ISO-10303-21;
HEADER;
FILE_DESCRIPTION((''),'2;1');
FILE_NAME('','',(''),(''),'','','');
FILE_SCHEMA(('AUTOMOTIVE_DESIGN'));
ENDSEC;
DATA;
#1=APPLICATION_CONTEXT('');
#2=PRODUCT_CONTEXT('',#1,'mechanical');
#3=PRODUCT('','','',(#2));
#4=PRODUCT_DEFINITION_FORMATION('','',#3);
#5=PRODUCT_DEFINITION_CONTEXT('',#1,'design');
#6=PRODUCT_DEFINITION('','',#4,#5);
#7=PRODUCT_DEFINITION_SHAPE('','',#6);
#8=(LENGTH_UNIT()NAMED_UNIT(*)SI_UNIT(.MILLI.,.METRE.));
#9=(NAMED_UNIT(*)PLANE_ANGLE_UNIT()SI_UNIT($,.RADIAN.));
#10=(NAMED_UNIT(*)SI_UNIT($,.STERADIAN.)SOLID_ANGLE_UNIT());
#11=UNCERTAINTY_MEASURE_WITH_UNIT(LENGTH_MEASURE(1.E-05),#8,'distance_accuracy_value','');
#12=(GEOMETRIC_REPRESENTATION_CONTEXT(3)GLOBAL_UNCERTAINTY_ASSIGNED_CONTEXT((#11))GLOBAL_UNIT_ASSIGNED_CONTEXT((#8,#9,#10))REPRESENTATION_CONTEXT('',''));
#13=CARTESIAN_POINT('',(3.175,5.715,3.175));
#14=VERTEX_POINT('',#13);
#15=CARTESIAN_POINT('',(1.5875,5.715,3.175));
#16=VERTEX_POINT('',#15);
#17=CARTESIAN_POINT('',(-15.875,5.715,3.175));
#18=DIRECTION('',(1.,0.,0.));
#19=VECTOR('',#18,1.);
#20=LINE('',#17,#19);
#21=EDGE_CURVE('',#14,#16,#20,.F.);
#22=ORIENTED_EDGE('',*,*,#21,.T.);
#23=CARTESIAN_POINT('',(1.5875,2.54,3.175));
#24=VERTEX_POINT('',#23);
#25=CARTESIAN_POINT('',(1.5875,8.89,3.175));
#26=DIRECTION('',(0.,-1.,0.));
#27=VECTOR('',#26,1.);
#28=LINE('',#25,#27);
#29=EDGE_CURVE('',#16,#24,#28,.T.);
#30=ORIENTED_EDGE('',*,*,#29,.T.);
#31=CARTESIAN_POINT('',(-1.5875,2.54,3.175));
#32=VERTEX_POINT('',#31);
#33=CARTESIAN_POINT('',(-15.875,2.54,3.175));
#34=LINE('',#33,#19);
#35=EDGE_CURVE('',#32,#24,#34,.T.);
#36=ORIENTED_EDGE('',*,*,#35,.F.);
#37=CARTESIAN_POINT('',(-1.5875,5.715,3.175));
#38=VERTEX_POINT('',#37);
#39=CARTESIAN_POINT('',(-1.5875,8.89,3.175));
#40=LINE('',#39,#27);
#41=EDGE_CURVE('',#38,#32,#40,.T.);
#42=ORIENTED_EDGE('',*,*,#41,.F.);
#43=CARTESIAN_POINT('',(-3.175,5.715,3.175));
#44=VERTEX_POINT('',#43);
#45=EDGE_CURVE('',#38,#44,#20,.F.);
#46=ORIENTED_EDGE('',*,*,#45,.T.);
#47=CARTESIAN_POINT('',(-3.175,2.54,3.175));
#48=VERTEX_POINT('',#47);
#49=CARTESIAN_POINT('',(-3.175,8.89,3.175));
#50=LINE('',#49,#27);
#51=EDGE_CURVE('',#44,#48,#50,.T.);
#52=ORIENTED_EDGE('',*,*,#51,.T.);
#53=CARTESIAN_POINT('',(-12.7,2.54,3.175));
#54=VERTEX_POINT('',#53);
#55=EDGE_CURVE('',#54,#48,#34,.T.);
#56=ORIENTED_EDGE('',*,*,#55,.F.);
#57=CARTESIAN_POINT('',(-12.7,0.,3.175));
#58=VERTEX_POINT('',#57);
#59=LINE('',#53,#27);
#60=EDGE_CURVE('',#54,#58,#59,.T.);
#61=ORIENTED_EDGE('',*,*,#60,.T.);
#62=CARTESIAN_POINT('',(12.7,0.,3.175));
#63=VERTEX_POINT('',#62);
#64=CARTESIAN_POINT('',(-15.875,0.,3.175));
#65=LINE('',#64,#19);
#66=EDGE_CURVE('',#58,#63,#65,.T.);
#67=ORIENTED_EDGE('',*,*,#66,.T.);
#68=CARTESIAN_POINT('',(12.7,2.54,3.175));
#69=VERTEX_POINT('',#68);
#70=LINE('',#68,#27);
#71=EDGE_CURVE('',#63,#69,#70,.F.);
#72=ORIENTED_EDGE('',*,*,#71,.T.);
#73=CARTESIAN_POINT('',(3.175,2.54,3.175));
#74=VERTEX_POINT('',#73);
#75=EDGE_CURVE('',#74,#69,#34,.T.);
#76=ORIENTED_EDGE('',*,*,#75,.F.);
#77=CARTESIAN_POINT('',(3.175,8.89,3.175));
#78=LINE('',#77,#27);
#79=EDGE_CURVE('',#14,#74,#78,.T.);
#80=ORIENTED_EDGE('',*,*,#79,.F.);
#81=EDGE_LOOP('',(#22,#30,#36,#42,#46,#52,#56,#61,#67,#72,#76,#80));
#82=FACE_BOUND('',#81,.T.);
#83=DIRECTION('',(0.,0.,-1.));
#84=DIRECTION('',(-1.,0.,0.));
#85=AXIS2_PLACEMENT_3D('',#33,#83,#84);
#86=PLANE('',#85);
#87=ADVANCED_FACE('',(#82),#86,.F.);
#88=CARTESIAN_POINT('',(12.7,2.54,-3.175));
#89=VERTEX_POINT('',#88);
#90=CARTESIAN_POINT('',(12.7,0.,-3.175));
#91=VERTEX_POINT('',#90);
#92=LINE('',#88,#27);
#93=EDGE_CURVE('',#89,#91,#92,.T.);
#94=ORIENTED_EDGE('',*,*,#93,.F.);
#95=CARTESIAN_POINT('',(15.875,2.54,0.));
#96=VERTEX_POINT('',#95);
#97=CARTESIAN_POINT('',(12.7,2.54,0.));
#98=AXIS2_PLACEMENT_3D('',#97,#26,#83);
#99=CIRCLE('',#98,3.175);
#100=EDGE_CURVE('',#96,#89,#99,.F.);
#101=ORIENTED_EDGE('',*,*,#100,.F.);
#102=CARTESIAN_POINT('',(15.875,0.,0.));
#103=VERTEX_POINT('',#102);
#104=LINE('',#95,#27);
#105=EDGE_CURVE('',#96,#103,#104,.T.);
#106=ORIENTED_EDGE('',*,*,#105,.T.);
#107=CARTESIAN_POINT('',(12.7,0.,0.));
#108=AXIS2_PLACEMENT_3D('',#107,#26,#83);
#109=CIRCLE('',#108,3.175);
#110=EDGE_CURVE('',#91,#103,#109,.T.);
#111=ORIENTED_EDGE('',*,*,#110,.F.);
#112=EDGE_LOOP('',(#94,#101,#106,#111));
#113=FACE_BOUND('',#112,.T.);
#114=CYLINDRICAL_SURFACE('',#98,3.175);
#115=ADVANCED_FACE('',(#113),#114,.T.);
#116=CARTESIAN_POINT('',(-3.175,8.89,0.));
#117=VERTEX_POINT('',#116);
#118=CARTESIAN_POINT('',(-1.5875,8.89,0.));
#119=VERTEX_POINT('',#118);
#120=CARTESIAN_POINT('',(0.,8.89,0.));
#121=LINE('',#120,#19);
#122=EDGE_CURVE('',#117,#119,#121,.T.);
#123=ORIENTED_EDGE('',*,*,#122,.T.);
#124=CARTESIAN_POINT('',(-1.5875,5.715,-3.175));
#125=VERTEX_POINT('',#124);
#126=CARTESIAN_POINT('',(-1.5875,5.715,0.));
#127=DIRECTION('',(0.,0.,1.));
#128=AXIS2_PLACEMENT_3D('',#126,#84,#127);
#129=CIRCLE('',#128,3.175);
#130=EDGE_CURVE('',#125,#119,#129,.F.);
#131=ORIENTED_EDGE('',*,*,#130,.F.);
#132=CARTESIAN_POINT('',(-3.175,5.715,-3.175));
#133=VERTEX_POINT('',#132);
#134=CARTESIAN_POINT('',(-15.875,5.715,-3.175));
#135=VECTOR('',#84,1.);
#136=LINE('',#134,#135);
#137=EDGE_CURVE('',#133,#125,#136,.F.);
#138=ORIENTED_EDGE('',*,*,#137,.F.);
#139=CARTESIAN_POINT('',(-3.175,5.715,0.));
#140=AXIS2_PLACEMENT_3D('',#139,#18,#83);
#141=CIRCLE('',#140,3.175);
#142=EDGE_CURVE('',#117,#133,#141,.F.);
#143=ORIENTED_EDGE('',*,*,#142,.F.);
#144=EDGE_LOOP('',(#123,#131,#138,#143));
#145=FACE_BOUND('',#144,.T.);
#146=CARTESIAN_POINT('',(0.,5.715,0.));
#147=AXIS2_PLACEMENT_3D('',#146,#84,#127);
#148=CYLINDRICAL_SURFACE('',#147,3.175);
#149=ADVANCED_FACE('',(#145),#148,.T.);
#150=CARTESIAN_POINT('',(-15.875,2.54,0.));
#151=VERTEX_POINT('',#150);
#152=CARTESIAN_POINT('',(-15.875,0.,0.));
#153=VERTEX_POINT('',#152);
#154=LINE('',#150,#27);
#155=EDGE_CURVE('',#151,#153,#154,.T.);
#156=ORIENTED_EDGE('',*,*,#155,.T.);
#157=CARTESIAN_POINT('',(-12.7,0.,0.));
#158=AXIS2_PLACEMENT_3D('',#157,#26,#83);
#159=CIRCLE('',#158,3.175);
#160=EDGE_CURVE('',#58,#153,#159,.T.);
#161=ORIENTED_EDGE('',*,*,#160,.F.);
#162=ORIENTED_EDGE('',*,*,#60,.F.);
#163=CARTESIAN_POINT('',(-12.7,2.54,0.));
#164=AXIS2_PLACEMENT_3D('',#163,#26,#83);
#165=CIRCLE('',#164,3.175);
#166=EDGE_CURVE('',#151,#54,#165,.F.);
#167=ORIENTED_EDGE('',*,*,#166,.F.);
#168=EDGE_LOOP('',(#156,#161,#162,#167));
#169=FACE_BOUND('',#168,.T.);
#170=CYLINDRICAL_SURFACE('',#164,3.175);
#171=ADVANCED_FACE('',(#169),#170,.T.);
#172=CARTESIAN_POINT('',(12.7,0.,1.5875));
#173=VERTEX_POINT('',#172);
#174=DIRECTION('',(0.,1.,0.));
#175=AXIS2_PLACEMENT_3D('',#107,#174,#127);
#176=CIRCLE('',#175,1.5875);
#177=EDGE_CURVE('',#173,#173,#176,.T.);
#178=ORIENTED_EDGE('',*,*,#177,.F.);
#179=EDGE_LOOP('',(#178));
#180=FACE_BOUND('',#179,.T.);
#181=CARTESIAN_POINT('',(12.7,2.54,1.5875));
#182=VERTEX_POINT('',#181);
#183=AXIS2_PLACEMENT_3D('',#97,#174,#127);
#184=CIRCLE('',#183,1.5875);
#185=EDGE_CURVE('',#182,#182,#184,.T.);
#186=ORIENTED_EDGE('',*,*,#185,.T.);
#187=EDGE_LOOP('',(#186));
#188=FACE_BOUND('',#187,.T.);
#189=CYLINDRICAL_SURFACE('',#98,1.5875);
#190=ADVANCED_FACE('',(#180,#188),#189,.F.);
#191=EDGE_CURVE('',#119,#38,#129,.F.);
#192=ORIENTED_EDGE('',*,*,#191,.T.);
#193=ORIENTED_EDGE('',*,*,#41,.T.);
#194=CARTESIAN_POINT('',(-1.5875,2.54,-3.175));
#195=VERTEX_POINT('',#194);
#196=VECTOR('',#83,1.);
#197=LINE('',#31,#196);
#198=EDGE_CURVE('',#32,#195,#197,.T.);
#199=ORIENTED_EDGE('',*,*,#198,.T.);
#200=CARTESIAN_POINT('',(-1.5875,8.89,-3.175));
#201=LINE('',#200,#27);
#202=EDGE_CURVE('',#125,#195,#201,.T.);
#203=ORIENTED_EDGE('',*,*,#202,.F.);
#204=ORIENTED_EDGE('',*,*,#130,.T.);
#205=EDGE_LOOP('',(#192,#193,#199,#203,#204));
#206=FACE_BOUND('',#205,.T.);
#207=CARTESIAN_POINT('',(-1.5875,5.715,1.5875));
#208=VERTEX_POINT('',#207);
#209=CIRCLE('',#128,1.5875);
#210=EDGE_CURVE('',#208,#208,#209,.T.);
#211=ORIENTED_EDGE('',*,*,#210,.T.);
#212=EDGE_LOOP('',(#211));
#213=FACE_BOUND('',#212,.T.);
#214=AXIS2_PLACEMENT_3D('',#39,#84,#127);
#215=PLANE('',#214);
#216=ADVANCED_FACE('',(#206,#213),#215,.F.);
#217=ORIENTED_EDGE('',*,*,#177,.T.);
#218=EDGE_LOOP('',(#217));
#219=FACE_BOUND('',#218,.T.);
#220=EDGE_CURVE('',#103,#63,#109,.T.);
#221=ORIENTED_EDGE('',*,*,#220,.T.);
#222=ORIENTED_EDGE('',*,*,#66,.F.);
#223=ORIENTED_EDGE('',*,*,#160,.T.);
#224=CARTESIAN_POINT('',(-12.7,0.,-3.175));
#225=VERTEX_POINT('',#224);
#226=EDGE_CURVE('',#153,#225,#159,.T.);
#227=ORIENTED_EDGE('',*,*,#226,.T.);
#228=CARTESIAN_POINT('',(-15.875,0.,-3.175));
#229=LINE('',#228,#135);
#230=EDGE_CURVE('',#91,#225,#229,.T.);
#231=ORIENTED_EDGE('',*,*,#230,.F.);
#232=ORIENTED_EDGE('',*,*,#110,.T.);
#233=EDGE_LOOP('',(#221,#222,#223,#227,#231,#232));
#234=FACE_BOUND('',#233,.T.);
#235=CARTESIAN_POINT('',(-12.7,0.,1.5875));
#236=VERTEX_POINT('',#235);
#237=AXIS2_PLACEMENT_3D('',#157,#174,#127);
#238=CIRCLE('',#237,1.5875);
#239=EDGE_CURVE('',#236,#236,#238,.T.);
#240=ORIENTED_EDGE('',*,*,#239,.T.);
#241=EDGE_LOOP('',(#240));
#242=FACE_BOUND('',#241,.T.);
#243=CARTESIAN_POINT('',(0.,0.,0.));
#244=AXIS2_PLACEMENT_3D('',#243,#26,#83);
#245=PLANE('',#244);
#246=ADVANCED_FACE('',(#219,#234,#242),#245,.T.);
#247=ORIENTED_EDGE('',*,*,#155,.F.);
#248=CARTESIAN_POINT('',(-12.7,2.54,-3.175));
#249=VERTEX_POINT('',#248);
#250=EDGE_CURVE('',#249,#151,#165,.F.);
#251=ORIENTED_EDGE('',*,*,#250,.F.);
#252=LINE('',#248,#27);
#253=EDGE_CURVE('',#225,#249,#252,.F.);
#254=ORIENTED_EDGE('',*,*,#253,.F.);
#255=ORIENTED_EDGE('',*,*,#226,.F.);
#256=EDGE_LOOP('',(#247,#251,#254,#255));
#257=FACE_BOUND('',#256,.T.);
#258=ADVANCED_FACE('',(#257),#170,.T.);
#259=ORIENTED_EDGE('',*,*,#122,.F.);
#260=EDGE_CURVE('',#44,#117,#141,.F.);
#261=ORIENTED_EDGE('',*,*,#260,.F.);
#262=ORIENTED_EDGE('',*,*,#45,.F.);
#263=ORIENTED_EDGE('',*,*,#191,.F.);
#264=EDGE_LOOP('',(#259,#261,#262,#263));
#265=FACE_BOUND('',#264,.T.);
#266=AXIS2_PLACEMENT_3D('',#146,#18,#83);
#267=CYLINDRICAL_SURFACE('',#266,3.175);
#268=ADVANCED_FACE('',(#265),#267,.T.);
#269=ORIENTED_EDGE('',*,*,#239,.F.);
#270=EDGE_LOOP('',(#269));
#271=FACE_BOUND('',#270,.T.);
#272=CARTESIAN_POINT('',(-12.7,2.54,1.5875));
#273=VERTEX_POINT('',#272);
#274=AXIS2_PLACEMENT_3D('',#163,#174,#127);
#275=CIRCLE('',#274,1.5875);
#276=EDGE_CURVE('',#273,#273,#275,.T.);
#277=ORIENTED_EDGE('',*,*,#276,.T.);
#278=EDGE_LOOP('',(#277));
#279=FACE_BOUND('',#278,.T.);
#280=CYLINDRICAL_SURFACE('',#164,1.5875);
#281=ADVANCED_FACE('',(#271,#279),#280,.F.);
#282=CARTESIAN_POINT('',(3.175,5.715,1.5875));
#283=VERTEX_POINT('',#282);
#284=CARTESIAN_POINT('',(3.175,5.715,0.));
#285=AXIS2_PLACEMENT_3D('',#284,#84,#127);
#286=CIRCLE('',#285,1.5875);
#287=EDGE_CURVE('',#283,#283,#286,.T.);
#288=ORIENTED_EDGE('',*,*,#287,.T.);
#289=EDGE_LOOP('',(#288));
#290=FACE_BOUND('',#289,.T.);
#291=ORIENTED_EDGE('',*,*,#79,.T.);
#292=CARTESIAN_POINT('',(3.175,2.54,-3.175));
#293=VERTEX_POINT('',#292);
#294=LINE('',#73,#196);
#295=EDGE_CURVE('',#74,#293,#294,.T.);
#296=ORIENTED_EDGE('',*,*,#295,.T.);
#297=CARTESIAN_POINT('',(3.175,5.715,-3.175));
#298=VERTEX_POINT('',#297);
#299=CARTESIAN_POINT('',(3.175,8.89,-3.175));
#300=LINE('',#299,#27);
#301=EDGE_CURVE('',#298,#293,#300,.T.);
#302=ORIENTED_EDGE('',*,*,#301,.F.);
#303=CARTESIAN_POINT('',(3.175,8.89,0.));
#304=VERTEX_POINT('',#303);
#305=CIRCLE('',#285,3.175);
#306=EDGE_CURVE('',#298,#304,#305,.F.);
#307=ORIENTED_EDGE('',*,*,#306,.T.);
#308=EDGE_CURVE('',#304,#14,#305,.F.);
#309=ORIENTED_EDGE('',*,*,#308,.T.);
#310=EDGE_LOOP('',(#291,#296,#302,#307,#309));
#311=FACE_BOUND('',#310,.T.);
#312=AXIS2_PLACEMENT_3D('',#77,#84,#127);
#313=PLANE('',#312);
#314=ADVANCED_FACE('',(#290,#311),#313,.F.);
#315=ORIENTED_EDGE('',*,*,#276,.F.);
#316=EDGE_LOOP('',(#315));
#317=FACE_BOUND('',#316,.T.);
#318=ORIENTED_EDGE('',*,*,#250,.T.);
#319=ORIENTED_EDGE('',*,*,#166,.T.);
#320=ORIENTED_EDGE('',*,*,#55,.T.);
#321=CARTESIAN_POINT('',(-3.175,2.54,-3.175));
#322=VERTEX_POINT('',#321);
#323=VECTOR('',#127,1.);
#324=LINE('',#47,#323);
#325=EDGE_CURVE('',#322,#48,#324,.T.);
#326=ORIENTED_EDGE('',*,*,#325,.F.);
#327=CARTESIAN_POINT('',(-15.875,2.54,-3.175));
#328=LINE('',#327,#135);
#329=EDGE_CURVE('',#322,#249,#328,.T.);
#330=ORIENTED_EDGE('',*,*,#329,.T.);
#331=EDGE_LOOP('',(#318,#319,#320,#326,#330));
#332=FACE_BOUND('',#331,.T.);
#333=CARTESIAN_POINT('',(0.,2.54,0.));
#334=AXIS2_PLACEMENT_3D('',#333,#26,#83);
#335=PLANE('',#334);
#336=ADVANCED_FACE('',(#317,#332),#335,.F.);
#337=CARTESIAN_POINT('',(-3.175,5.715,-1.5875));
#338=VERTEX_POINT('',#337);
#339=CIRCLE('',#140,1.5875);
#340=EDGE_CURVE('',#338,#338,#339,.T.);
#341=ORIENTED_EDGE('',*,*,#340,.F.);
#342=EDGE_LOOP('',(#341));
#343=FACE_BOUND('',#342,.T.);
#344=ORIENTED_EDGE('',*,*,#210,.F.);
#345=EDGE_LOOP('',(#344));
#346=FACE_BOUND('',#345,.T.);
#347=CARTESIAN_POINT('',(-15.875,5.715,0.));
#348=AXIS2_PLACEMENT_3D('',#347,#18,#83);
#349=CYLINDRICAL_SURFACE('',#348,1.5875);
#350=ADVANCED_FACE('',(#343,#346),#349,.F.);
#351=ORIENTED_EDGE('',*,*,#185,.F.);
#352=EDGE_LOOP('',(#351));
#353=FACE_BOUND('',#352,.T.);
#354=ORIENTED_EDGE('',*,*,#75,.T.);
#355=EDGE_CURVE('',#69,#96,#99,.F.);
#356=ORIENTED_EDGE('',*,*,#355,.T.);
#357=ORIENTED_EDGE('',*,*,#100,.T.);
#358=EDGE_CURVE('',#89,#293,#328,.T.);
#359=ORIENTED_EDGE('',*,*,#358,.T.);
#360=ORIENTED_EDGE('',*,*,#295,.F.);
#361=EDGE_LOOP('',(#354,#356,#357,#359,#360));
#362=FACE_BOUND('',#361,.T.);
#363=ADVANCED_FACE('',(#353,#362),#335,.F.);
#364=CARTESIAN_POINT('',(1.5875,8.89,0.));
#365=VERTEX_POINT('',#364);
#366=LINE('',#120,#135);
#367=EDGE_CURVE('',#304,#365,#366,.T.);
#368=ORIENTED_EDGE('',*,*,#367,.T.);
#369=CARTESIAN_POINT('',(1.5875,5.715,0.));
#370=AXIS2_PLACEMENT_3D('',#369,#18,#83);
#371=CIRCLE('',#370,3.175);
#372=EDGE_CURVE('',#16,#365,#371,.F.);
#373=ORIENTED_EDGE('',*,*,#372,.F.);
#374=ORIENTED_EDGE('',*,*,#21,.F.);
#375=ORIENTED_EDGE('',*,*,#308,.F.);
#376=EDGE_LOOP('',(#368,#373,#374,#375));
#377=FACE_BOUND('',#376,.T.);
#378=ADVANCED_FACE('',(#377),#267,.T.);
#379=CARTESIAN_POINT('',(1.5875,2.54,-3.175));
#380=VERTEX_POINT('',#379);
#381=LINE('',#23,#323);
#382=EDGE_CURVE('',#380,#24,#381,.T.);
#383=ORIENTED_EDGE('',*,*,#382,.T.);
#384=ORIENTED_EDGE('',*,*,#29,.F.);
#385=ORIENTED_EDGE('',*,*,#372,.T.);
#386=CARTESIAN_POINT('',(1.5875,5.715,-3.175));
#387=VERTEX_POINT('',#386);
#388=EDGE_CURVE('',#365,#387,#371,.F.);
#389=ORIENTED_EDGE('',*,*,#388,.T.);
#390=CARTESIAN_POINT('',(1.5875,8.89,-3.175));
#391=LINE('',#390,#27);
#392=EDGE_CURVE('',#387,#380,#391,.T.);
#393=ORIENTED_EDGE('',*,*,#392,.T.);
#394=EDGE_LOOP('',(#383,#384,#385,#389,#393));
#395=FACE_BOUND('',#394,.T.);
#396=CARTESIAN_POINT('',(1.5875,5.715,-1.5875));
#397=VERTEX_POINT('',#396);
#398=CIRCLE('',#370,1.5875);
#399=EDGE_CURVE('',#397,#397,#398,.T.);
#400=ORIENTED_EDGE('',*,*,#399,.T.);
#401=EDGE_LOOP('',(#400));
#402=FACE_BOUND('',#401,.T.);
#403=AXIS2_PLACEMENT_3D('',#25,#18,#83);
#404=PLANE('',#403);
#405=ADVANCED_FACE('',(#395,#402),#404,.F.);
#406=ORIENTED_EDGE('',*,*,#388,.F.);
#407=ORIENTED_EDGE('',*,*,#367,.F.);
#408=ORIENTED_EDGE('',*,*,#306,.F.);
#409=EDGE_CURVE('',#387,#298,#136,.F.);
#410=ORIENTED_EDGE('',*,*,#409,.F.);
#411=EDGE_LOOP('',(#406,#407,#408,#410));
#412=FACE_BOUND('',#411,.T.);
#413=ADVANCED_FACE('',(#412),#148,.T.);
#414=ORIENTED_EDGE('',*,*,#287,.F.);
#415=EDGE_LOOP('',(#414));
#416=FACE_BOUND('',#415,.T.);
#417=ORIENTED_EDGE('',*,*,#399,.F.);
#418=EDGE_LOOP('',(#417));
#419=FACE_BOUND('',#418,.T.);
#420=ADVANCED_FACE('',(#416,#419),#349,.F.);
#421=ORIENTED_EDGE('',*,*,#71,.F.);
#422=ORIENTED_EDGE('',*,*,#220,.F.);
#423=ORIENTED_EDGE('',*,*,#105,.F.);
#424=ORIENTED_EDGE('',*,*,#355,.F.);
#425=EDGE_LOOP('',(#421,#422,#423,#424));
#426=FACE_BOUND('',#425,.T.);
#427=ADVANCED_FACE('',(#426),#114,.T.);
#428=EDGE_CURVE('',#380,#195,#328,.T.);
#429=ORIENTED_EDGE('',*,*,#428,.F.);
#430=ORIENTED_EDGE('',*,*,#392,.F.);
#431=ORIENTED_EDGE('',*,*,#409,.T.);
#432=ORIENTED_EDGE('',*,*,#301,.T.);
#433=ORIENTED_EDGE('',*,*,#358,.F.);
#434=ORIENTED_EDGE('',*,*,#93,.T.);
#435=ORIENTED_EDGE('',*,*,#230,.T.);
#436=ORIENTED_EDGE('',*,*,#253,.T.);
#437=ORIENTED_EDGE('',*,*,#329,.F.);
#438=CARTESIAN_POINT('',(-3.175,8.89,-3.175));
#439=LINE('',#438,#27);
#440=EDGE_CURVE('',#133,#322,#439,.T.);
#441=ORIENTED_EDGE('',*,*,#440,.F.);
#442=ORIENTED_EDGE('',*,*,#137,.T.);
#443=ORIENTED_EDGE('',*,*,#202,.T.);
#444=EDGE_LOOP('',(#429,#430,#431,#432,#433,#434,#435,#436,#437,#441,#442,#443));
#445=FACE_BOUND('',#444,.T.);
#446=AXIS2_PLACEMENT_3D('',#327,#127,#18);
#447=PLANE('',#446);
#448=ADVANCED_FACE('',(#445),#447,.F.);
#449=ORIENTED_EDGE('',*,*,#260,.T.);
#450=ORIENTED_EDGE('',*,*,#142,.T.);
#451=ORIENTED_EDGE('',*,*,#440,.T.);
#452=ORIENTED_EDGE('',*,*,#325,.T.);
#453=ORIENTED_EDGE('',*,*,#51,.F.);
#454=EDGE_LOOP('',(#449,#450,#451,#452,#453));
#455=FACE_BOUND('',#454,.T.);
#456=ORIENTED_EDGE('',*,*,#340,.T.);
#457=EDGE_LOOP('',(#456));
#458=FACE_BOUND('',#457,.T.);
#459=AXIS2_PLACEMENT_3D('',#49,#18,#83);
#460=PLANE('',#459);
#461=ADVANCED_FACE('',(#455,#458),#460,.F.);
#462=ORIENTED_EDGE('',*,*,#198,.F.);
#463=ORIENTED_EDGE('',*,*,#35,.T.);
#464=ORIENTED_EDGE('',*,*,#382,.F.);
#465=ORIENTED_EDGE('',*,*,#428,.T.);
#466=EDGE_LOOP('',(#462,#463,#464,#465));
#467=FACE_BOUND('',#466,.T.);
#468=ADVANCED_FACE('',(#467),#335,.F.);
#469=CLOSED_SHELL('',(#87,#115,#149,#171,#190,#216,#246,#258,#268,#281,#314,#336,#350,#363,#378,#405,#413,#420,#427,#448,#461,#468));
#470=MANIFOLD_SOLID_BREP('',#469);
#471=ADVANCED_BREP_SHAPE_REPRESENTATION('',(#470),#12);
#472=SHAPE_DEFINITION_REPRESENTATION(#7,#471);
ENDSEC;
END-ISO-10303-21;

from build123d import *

# Parameters (mm, degrees)
SKETCH2_W               = 31.75
SKETCH2_H               = 6.35
SKETCH2_R               = 1.5875
BOSS_EXTRUDE1_DEPTH     = 2.54
SKETCH3_W               = 1.5875
SKETCH3_H               = 6.35
BOSS_EXTRUDE2_DEPTH     = 6.35
CUT_EXTRUDE1_DEPTH      = 20.850733771
CUT_EXTRUDE1_DEPTH_BACK = 20.850733771
SKETCH4_R               = 1.5875
FILLET1_R               = 3.175


with BuildPart() as part:
    # Sketch2 → Boss-Extrude1 (new body)
    with BuildSketch(Plane(origin=(0, 0, 0), x_dir=(1, 0, 0), z_dir=(0, 1, 0))):
        Rectangle(SKETCH2_W, SKETCH2_H)
        with Locations(Location((-12.7, 0, 0), (0, 0, 270))):
            Circle(SKETCH2_R, mode=Mode.SUBTRACT)
        with Locations(Location((12.7, 0, 0), (0, 0, 270))):
            Circle(SKETCH2_R, mode=Mode.SUBTRACT)
    extrude(amount=BOSS_EXTRUDE1_DEPTH)

    # Sketch3 → Boss-Extrude2 (add)
    with BuildSketch(Plane(origin=(0, 2.54, 0), x_dir=(1, 0, 0), z_dir=(0, 1, 0))):
        with Locations((-2.38125, 0)):
            Rectangle(SKETCH3_W, SKETCH3_H)
        with Locations((2.38125, 0)):
            Rectangle(SKETCH3_W, SKETCH3_H)
    extrude(amount=BOSS_EXTRUDE2_DEPTH)

    # Sketch4 → Cut-Extrude1 (cut, two sides: drawn at the far end of the back side and taken through both)
    with BuildSketch(Plane(origin=(-1.5875, 0, 0), x_dir=(0, 0, -1), z_dir=(1, 0, 0)).offset(-CUT_EXTRUDE1_DEPTH_BACK)):
        with Locations((0, 5.715)):
            Circle(SKETCH4_R)
    extrude(amount=CUT_EXTRUDE1_DEPTH + CUT_EXTRUDE1_DEPTH_BACK, mode=Mode.SUBTRACT)

    # Fillet1
    fillet1_edges = [part.edges().sort_by_distance(p)[0] for p in [
        (-15.875, 1.27, 3.175),
        (-15.875, 1.27, -3.175),
        (15.875, 1.27, -3.175),
        (15.875, 1.27, 3.175),
        (2.38125, 8.89, 3.175),
        (2.38125, 8.89, -3.175),
        (-2.38125, 8.89, -3.175),
        (-2.38125, 8.89, 3.175),
    ]]
    fillet(fillet1_edges, radius=FILLET1_R - 0.0001)  # a hair under: the kernel refuses the full size


solid = part.part
